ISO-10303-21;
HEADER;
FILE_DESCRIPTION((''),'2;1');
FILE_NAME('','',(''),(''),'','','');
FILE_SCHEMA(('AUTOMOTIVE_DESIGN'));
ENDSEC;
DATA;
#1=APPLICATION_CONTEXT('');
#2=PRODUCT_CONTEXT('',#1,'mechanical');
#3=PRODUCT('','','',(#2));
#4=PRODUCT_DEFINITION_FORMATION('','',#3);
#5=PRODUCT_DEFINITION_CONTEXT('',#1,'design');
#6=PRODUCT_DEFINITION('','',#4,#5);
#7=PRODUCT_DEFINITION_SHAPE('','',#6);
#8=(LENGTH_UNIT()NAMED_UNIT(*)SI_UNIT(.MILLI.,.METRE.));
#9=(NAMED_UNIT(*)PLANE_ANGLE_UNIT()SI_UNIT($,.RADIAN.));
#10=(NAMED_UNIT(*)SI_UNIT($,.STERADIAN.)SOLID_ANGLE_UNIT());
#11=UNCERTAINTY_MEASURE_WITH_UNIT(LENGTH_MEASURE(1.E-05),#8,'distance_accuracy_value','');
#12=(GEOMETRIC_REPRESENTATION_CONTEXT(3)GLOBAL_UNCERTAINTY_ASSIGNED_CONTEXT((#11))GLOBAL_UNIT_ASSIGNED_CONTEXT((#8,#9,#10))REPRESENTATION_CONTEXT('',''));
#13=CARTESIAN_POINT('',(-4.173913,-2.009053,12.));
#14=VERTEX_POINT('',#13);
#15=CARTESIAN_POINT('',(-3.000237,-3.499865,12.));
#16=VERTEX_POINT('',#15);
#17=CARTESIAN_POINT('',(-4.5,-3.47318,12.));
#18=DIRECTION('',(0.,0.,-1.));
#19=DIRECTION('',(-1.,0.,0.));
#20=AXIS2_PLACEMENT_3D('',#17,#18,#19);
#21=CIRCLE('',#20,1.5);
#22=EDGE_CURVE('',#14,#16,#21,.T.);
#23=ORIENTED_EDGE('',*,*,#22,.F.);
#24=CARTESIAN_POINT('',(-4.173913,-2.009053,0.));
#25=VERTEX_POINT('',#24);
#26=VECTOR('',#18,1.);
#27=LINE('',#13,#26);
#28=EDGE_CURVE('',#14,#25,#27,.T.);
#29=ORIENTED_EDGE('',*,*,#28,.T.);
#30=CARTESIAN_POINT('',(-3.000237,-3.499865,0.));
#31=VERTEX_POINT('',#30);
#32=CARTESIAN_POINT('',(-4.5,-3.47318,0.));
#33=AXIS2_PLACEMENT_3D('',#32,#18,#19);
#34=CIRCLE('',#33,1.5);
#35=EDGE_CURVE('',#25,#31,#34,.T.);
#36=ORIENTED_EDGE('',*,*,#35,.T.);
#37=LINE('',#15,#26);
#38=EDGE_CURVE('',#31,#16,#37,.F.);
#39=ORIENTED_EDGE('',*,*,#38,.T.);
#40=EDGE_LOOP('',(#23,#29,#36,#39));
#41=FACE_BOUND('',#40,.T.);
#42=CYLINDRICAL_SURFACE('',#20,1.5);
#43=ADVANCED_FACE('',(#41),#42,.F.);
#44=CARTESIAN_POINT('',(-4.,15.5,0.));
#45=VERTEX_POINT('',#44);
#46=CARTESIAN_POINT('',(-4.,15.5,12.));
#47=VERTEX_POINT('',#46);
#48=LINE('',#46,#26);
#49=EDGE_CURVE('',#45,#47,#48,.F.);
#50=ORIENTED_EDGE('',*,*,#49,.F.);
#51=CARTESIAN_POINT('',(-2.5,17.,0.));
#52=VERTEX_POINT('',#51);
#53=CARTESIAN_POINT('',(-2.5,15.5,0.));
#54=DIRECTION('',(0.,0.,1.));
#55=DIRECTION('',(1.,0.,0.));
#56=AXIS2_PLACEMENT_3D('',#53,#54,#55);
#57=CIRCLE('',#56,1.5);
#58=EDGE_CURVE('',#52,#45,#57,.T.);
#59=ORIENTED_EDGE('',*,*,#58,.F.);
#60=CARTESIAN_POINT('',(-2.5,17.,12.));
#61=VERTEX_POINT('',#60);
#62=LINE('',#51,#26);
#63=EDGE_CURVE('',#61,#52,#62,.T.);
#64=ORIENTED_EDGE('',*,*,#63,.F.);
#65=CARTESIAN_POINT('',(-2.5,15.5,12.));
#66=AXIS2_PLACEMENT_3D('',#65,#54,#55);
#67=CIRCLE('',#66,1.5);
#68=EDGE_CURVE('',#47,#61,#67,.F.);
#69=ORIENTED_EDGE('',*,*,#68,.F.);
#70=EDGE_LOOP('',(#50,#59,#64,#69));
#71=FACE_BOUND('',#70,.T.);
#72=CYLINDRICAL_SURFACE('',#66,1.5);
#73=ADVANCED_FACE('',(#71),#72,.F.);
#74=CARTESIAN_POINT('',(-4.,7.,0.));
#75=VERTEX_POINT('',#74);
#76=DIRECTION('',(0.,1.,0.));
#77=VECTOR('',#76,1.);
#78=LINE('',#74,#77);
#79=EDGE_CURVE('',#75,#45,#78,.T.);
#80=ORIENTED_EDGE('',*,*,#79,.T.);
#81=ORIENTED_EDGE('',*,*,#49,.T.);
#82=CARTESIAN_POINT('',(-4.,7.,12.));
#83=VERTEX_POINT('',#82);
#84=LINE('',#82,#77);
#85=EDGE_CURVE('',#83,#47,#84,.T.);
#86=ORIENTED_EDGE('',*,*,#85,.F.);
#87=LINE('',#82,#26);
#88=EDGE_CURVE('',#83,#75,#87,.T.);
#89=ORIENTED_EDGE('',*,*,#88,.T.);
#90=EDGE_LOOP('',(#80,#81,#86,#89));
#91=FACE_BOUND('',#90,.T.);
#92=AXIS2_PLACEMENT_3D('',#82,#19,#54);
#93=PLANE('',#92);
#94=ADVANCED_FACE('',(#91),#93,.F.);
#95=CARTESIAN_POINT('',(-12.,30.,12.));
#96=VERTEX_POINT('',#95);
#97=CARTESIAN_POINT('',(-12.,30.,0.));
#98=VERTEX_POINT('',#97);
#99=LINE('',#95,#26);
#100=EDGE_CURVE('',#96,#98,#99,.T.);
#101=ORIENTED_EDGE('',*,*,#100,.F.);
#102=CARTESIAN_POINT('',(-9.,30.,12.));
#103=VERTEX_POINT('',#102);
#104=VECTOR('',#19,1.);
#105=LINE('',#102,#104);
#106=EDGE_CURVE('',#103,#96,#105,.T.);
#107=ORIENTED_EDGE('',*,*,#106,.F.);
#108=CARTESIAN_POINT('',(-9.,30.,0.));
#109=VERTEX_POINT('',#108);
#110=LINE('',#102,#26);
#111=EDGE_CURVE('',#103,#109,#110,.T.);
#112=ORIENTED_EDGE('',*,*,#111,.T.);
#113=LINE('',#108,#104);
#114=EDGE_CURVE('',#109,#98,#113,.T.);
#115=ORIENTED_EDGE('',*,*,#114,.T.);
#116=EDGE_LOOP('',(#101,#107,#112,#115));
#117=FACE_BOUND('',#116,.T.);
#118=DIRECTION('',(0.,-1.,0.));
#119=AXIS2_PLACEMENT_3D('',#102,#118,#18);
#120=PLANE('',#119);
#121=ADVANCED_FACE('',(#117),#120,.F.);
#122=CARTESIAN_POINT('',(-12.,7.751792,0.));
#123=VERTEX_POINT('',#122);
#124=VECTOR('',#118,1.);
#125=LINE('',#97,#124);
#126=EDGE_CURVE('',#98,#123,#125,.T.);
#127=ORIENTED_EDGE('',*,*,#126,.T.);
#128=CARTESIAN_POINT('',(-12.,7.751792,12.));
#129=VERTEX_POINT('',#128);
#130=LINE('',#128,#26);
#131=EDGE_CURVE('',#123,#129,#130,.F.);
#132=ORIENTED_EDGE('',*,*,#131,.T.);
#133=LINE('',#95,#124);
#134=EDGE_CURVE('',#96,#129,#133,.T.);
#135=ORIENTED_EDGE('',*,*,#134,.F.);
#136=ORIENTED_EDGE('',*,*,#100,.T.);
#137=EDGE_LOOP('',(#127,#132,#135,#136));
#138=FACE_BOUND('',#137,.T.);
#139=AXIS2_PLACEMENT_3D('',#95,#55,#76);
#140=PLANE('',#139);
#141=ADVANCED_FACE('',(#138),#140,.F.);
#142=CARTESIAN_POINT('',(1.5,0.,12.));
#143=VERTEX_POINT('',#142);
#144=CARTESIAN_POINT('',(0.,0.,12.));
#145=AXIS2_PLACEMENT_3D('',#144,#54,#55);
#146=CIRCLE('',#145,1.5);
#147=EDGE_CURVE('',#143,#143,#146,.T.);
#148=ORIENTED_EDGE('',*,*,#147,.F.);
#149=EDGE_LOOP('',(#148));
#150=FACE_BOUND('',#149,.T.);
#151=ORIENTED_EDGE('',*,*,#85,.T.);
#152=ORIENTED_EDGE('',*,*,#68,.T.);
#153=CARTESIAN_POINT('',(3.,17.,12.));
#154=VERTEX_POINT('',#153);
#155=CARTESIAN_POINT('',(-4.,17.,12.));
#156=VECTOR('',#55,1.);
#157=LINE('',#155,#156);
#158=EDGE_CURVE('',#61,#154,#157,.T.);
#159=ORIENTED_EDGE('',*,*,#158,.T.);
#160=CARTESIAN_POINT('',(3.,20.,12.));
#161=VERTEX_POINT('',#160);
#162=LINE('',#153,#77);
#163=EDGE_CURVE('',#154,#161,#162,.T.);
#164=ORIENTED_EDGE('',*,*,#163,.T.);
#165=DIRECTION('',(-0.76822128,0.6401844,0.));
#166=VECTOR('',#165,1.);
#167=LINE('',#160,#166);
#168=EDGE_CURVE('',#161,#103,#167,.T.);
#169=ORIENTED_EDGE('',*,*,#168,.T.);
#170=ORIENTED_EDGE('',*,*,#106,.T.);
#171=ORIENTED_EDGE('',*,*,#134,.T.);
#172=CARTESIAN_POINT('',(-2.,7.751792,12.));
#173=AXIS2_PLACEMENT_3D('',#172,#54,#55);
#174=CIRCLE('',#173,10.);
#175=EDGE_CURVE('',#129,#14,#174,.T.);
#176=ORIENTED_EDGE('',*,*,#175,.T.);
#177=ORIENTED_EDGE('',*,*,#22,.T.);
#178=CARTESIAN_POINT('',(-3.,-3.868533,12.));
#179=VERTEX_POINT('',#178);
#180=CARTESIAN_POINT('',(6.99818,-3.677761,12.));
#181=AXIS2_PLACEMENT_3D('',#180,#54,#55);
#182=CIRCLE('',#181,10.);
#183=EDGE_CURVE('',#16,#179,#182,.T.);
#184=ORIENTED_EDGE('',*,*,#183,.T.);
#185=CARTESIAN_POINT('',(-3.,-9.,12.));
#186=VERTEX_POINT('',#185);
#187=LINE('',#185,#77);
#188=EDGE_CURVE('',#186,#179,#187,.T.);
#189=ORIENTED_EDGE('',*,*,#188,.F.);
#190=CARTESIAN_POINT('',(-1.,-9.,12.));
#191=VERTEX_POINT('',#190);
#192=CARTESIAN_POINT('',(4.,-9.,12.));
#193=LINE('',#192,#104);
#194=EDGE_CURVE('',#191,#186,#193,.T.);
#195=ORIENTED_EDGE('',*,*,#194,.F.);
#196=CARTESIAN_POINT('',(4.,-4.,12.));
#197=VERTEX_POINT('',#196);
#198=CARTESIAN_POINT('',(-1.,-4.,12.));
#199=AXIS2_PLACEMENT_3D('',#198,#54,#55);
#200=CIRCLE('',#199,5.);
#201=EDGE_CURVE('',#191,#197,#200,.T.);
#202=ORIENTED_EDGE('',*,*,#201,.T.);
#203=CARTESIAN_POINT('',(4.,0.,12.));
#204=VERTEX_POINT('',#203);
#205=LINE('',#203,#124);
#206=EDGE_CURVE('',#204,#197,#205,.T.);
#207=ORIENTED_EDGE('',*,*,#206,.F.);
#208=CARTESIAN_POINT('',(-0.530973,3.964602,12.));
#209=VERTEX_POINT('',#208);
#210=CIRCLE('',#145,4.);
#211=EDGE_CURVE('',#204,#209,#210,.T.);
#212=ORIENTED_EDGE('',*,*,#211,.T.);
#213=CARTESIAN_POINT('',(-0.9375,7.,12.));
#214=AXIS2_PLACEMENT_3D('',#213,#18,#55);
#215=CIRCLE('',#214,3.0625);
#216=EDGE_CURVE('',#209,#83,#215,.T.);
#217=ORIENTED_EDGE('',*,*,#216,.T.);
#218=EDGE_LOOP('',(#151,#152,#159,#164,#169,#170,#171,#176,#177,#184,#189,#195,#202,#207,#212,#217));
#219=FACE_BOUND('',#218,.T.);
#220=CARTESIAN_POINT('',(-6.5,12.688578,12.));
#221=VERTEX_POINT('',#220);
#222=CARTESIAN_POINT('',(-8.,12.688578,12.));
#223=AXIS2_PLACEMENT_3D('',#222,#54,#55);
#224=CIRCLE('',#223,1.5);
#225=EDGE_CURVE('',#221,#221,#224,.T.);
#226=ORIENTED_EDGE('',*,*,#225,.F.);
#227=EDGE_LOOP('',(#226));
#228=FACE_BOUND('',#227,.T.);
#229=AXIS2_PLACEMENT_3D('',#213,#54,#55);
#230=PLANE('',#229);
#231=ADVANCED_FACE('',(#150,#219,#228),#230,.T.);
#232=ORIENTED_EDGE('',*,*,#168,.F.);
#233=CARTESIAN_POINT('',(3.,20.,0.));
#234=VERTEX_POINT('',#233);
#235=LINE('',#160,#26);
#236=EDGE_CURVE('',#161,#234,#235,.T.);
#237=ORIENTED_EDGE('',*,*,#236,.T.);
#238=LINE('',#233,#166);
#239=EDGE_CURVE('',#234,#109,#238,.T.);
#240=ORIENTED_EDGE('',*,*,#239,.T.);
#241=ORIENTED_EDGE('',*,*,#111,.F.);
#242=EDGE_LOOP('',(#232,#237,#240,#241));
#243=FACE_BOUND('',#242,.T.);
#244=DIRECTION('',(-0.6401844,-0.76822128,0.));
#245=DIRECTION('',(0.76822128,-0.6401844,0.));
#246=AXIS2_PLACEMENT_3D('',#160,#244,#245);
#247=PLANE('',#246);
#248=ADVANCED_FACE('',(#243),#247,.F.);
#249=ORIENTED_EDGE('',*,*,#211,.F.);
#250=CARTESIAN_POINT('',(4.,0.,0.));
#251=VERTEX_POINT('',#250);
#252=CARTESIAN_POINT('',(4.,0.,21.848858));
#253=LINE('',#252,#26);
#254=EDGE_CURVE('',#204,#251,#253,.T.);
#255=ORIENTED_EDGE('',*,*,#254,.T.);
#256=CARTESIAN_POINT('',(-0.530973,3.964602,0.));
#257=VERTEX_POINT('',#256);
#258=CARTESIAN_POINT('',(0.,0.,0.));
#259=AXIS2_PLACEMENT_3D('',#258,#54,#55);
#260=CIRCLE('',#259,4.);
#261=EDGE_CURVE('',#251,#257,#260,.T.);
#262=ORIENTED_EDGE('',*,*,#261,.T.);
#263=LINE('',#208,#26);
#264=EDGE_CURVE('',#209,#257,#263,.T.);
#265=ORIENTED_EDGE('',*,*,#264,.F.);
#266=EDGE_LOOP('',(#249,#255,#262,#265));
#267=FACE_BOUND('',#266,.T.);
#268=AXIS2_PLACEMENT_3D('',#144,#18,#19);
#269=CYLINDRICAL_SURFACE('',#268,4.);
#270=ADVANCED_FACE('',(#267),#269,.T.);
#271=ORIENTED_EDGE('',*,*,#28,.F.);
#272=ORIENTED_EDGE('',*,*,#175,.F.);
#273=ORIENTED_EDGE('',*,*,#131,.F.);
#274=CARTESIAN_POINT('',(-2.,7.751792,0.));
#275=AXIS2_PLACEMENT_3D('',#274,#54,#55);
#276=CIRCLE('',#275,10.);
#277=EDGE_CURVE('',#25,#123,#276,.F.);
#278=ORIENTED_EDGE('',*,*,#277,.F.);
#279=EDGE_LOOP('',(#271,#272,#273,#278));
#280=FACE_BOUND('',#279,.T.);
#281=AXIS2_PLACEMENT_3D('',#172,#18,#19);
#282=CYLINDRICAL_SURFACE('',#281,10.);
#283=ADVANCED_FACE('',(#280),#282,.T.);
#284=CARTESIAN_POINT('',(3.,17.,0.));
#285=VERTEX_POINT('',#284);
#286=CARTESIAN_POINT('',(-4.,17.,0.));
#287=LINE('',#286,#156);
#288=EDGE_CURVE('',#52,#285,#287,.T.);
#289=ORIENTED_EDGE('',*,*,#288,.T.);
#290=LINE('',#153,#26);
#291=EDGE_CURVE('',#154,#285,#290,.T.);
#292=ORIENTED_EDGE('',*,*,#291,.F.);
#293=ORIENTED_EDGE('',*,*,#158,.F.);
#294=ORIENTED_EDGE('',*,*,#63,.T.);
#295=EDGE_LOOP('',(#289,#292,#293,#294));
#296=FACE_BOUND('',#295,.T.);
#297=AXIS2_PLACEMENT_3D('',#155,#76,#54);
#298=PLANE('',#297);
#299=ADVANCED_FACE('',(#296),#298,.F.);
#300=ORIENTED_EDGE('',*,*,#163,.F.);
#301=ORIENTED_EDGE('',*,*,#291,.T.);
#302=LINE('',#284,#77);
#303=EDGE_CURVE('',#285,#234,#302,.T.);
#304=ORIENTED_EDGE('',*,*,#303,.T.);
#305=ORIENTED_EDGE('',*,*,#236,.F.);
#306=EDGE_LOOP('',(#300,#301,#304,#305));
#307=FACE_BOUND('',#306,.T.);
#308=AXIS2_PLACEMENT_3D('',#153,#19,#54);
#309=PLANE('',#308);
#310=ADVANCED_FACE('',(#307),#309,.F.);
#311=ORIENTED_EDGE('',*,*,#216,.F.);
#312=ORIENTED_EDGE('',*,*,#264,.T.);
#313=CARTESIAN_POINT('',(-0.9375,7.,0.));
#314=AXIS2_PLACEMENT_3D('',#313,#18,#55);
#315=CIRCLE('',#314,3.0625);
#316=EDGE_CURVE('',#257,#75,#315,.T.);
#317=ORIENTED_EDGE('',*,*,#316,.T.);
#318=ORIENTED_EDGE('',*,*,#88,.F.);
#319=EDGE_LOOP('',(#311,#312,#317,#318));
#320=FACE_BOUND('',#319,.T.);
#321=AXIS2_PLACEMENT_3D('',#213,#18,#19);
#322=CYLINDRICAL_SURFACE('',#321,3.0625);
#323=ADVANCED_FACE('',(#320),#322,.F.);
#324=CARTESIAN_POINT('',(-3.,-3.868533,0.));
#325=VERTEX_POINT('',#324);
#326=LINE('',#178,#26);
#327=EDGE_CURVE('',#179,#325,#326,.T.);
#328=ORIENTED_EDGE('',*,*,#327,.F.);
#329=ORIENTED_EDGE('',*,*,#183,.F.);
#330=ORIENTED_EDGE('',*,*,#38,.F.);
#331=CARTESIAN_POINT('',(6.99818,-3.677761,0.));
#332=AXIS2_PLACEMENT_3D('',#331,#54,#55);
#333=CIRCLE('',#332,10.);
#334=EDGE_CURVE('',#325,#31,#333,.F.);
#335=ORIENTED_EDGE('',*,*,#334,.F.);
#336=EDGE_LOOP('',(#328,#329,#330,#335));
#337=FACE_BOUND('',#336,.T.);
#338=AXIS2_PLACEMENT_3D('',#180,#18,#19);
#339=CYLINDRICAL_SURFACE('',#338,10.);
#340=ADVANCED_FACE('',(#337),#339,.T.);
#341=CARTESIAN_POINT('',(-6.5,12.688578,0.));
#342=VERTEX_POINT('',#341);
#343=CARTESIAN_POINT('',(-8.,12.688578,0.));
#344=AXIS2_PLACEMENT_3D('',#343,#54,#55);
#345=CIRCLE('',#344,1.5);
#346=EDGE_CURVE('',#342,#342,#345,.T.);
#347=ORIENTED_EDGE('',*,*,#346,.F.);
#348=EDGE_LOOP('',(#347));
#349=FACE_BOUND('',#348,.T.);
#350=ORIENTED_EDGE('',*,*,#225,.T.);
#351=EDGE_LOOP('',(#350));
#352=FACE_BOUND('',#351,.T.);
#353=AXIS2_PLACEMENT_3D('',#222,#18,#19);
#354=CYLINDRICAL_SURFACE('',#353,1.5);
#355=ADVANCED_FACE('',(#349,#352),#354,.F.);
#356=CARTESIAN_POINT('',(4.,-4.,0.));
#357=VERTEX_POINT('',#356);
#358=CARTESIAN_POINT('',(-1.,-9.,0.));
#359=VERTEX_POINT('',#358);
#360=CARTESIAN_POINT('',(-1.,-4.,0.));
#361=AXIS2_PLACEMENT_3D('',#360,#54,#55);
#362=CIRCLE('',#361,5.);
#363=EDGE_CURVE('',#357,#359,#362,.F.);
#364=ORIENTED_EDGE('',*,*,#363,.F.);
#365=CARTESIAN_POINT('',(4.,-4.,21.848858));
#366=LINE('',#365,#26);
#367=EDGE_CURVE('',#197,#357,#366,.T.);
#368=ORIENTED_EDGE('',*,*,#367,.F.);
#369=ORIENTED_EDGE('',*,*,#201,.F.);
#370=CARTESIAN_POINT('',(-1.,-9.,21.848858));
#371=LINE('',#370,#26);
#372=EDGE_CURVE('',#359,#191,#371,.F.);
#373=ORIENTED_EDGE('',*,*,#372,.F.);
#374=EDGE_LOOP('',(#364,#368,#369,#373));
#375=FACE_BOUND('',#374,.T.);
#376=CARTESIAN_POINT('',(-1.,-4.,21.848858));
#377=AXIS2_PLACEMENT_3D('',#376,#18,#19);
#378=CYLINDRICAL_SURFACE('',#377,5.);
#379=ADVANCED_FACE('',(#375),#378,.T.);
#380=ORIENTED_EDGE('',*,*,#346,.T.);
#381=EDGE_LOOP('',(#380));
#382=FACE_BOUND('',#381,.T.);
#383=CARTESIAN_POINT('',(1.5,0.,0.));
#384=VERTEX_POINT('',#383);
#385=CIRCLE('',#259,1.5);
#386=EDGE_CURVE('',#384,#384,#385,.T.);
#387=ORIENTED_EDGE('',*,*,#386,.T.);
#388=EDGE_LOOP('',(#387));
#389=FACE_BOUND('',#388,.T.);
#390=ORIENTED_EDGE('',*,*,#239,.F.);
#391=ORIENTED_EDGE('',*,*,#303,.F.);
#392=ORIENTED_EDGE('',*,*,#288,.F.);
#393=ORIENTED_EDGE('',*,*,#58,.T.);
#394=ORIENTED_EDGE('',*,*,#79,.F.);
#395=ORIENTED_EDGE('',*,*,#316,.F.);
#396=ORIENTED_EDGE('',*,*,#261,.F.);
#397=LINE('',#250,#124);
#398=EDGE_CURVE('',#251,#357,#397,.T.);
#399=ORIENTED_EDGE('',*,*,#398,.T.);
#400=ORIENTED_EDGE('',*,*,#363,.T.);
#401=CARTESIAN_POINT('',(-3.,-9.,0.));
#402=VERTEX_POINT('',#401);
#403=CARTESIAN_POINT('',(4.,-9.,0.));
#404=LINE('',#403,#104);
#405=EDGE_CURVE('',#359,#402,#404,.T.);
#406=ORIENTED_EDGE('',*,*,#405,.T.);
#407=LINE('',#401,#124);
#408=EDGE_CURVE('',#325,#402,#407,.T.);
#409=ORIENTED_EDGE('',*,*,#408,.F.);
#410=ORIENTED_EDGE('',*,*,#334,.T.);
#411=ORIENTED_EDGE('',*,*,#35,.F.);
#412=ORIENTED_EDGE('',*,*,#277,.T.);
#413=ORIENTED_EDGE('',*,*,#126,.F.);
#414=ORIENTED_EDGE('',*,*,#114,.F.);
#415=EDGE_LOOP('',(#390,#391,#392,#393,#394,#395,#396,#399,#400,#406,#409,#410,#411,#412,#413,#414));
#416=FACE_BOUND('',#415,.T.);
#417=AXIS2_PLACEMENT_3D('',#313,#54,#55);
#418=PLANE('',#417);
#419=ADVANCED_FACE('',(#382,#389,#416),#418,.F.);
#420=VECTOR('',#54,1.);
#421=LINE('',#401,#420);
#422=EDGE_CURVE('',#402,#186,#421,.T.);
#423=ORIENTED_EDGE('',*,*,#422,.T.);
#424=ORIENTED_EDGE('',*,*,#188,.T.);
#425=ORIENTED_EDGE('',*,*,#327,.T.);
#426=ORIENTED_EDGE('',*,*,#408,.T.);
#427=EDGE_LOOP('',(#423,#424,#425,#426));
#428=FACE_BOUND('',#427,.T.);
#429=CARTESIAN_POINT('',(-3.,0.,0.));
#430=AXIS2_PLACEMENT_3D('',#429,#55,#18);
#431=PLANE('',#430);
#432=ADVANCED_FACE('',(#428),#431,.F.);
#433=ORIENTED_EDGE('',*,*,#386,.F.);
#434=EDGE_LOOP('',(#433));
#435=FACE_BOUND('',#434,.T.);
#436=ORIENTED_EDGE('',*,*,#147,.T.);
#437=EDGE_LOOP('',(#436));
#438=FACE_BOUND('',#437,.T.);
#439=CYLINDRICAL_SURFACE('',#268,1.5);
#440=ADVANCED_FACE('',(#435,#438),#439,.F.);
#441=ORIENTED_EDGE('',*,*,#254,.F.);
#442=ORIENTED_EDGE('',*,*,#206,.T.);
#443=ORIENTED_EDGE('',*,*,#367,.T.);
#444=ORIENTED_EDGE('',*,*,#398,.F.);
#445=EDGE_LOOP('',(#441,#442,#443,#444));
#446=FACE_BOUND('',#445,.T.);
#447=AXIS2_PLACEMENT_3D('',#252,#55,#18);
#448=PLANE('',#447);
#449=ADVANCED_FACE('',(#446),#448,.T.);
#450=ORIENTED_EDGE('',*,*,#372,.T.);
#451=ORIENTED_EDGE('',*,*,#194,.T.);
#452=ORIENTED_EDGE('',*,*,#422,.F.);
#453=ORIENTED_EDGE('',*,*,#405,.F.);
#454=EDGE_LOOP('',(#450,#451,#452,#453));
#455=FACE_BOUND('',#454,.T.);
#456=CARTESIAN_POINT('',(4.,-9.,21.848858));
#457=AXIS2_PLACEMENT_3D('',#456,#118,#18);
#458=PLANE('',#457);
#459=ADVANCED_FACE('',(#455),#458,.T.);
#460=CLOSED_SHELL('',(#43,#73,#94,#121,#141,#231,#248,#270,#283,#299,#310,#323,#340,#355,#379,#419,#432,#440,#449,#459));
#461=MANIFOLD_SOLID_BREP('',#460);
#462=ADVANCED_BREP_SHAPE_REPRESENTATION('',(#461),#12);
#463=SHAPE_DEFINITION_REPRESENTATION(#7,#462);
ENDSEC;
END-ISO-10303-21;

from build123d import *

# Parameters (mm, degrees)
SKETCH_1_R          = 1.5
EXTRUDE_1_DEPTH     = 12
FILLET_1_R          = 1.5
EXTRUDE_2_DEPTH     = 12
SKETCH_3_W          = 12
SKETCH_3_H          = 7
EXTRUDE_4_DEPTH     = 3
FILLET_3_R          = 5
SKETCH_4_R          = 1.5
CUT_EXTRUDE_1_DEPTH = 35.467375879
FILLET_4_R          = 10
FILLET_5_R          = 10


with BuildPart() as part:
    # 草图1 → 凸台-拉伸1 (new body)
    with BuildSketch(Plane.XY):
        with BuildLine():
            Line((-4, 7), (-4, 17))
            Line((-4, 17), (3, 17))
            Line((3, 17), (3, 20))
            Line((3, 20), (-9, 30))
            Line((-9, 30), (-12, 30))
            Line((-12, 30), (-12, 7))
            ThreePointArc((-12, 7), (-8.222207225, -1.325379685), (0.530973451, -3.96460177))
            ThreePointArc((0.530973451, -3.96460177), (3.96460177, 0.530973451), (-0.530973451, 3.96460177))
            ThreePointArc((-0.530973451, 3.96460177), (-2.954170362, 4.695233872), (-4, 7))
        make_face()
        Circle(SKETCH_1_R, mode=Mode.SUBTRACT)
        with Locations((-8, 12.68857754)):
            Circle(SKETCH_1_R, mode=Mode.SUBTRACT)
    extrude(amount=EXTRUDE_1_DEPTH)

    # 圆角1
    fillet_1_edges = [part.edges().sort_by_distance(p)[0] for p in [
        (-4, 17, 6),
    ]]
    fillet(fillet_1_edges, radius=FILLET_1_R)

    # 草图2 → 凸台-拉伸2 (add)
    with BuildSketch(Plane(origin=(0, 0, 0), x_dir=(-1, 0, 0), z_dir=(0, 0, -1))):
        Polygon((-4, 0), (-4, -9), (0, -9), (0, -4.022703843), align=None)
    extrude(amount=-EXTRUDE_2_DEPTH)

    # 草图3 → 凸台-拉伸4 (add)
    with BuildSketch(Plane.ZY):
        with Locations((6, -5.5)):
            Rectangle(SKETCH_3_W, SKETCH_3_H)
    extrude(amount=EXTRUDE_4_DEPTH)

    # 圆角3
    fillet_3_edges = [part.edges().sort_by_distance(p)[0] for p in [
        (4, -9, 6),
    ]]
    fillet(fillet_3_edges, radius=FILLET_3_R)

    # 草图4 → 切除-拉伸1 (cut, through all)
    with BuildSketch(Plane(origin=(0, 0, 0), x_dir=(-1, 0, 0), z_dir=(0, 0, -1))):
        with Locations((4.5, -3.473180033)):
            Circle(SKETCH_4_R)
    extrude(amount=-CUT_EXTRUDE_1_DEPTH, mode=Mode.SUBTRACT)

    # 圆角4
    fillet_4_edges = [part.edges().sort_by_distance(p)[0] for p in [
        (-5.884075597, -2.894963169, 6),
    ]]
    fillet(fillet_4_edges, radius=FILLET_4_R)

    # 圆角5
    # the kernel refuses this fillet: 10 mm, written as the material it takes off along each edge
    with BuildSketch(Plane(origin=(-3.050425983, -3.858842021, 12.906172426), x_dir=(0.1384631917279628, 0.990367580515692, 0), z_dir=(0, 0, -1))) as fillet_5_piece_1:
        with BuildLine():
            CenterArc((1.570698872, 9.926740679), FILLET_5_R, 260.94796551, 2.112432444)
            ThreePointArc((-0.002615053, 0.051282042), (-0.001337281, 0.025639504), (0, 0))
            ThreePointArc((0, 0), (0.181234485, 0.010988898), (0.36246897, 0))
        make_face()
    extrude(amount=13.812344852, mode=Mode.SUBTRACT)


solid = part.part
